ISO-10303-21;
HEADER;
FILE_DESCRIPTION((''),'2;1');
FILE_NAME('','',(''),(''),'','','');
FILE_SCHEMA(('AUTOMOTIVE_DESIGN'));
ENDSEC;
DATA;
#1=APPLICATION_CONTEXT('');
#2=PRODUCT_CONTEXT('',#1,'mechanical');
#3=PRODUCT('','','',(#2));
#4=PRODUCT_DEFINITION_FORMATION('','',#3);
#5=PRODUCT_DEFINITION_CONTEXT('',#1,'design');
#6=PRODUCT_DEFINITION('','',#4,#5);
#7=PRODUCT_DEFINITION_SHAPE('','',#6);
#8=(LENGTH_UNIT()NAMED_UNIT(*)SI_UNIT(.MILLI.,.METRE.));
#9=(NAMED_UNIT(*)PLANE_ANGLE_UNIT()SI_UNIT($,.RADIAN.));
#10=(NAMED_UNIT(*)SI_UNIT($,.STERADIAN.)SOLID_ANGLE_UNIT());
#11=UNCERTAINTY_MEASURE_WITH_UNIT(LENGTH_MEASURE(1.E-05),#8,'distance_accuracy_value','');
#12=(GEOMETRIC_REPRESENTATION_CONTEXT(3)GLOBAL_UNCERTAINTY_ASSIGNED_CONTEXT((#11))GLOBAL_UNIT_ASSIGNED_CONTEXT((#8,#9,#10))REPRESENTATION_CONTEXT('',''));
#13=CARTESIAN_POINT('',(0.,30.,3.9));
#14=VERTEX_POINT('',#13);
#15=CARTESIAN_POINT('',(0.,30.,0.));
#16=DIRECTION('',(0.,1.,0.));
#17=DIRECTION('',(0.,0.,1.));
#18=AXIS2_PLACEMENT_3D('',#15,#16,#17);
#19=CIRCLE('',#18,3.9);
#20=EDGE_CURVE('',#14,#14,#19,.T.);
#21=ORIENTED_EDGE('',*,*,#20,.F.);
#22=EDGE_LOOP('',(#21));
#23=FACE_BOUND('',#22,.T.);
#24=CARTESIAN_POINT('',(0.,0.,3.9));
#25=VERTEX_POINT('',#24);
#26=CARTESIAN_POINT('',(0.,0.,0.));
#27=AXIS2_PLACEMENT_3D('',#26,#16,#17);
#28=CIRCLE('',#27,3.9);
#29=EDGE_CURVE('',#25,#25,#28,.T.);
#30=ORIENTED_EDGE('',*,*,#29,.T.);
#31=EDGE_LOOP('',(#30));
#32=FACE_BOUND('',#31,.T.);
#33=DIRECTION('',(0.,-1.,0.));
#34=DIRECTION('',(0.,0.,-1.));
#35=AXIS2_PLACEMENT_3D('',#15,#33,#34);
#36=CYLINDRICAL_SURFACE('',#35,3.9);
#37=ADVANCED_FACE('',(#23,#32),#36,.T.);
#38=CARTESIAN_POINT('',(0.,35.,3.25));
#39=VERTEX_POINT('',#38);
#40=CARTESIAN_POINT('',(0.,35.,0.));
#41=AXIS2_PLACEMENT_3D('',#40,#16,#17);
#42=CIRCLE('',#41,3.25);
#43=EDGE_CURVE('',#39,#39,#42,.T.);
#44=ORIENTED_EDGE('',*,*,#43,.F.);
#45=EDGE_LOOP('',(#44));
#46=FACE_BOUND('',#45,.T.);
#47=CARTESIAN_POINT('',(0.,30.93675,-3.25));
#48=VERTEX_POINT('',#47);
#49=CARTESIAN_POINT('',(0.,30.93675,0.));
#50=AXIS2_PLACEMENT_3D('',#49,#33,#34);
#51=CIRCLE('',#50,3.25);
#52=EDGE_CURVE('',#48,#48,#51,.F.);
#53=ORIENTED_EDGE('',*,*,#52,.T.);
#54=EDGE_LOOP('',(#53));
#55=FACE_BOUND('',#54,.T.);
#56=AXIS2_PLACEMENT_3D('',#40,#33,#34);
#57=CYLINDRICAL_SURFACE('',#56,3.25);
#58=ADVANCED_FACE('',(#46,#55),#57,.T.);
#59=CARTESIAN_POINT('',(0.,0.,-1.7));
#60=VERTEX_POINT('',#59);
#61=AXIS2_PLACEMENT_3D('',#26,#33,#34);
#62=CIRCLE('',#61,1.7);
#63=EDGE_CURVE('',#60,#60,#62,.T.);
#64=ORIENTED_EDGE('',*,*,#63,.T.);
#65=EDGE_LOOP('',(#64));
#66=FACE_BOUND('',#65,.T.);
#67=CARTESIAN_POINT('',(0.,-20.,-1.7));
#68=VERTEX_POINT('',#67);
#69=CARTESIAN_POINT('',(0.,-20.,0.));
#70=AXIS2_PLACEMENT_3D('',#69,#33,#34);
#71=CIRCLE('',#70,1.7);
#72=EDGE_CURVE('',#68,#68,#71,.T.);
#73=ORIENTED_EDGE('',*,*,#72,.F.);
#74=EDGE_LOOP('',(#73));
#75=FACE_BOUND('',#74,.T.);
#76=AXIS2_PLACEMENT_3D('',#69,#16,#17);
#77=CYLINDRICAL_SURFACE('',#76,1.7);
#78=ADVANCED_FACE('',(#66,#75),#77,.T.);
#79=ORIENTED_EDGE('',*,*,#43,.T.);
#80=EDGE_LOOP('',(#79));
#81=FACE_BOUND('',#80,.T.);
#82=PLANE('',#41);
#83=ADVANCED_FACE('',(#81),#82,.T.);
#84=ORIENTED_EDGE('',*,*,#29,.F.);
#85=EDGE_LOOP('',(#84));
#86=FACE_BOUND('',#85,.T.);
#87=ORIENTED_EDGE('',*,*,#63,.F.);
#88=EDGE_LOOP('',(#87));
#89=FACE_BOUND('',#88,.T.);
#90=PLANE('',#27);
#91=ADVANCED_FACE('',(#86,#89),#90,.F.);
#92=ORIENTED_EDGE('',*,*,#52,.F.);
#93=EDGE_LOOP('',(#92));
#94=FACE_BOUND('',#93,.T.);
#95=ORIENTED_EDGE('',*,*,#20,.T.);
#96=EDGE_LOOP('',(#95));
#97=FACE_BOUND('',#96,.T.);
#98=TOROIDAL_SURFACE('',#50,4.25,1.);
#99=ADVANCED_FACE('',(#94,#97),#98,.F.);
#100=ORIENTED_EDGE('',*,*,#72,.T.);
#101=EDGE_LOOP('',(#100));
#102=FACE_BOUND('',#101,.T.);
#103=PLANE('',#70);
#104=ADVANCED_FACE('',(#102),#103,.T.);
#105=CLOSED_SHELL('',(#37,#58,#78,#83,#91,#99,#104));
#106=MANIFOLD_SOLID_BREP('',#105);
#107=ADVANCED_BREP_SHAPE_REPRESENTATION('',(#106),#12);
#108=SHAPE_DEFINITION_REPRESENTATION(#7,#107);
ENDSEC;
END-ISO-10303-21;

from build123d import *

# Parameters (mm, degrees)
CROQUIS1_R              = 3.9
SALIENTE_EXTRUIR1_DEPTH = 30
CROQUIS2_R              = 3.25
SALIENTE_EXTRUIR2_DEPTH = 5
CROQUIS3_R              = 1.7
SALIENTE_EXTRUIR3_DEPTH = 20
REDONDEO1_R             = 1


with BuildPart() as part:
    # Croquis1 → Saliente-Extruir1 (new body)
    with BuildSketch(Plane(origin=(0, 0, 0), x_dir=(1, 0, 0), z_dir=(0, 1, 0))):
        with Locations(Location((0, 0, 0), (0, 0, 270))):
            Circle(CROQUIS1_R)
    extrude(amount=SALIENTE_EXTRUIR1_DEPTH)

    # Croquis2 → Saliente-Extruir2 (add)
    with BuildSketch(Plane(origin=(0, 30, 0), x_dir=(1, 0, 0), z_dir=(0, 1, 0))):
        with Locations(Location((0, 0, 0), (0, 0, 270))):
            Circle(CROQUIS2_R)
    extrude(amount=SALIENTE_EXTRUIR2_DEPTH)

    # Croquis3 → Saliente-Extruir3 (add)
    with BuildSketch(Plane.XZ):
        with Locations(Location((0, 0, 0), (0, 0, 270))):
            Circle(CROQUIS3_R)
    extrude(amount=SALIENTE_EXTRUIR3_DEPTH)

    # Redondeo1
    # the kernel refuses this fillet: 1 mm, written as the material it adds along each edge
    with BuildSketch(Plane(origin=(0, 30, 0), x_dir=(0, 0, 1), z_dir=(-1, 0, 0))) as redondeo1_piece_1:
        with BuildLine():
            CenterArc((4.25, 0.9367497), REDONDEO1_R, 180, 69.512684885)
            Line((3.25, 0.9367497), (3.23, 0.9367497))
            Line((3.23, 0.9367497), (3.23, 0))
            Line((3.23, 0), (3.25, -0.02))
            ThreePointArc((3.25, -0.02), (3.575, -0.02), (3.893, -0.018734994))
            Line((3.893, -0.018734994), (3.9, 0))
        make_face()
    revolve(axis=Axis((0, 30, 0), (0, 1, 0)))


solid = part.part
